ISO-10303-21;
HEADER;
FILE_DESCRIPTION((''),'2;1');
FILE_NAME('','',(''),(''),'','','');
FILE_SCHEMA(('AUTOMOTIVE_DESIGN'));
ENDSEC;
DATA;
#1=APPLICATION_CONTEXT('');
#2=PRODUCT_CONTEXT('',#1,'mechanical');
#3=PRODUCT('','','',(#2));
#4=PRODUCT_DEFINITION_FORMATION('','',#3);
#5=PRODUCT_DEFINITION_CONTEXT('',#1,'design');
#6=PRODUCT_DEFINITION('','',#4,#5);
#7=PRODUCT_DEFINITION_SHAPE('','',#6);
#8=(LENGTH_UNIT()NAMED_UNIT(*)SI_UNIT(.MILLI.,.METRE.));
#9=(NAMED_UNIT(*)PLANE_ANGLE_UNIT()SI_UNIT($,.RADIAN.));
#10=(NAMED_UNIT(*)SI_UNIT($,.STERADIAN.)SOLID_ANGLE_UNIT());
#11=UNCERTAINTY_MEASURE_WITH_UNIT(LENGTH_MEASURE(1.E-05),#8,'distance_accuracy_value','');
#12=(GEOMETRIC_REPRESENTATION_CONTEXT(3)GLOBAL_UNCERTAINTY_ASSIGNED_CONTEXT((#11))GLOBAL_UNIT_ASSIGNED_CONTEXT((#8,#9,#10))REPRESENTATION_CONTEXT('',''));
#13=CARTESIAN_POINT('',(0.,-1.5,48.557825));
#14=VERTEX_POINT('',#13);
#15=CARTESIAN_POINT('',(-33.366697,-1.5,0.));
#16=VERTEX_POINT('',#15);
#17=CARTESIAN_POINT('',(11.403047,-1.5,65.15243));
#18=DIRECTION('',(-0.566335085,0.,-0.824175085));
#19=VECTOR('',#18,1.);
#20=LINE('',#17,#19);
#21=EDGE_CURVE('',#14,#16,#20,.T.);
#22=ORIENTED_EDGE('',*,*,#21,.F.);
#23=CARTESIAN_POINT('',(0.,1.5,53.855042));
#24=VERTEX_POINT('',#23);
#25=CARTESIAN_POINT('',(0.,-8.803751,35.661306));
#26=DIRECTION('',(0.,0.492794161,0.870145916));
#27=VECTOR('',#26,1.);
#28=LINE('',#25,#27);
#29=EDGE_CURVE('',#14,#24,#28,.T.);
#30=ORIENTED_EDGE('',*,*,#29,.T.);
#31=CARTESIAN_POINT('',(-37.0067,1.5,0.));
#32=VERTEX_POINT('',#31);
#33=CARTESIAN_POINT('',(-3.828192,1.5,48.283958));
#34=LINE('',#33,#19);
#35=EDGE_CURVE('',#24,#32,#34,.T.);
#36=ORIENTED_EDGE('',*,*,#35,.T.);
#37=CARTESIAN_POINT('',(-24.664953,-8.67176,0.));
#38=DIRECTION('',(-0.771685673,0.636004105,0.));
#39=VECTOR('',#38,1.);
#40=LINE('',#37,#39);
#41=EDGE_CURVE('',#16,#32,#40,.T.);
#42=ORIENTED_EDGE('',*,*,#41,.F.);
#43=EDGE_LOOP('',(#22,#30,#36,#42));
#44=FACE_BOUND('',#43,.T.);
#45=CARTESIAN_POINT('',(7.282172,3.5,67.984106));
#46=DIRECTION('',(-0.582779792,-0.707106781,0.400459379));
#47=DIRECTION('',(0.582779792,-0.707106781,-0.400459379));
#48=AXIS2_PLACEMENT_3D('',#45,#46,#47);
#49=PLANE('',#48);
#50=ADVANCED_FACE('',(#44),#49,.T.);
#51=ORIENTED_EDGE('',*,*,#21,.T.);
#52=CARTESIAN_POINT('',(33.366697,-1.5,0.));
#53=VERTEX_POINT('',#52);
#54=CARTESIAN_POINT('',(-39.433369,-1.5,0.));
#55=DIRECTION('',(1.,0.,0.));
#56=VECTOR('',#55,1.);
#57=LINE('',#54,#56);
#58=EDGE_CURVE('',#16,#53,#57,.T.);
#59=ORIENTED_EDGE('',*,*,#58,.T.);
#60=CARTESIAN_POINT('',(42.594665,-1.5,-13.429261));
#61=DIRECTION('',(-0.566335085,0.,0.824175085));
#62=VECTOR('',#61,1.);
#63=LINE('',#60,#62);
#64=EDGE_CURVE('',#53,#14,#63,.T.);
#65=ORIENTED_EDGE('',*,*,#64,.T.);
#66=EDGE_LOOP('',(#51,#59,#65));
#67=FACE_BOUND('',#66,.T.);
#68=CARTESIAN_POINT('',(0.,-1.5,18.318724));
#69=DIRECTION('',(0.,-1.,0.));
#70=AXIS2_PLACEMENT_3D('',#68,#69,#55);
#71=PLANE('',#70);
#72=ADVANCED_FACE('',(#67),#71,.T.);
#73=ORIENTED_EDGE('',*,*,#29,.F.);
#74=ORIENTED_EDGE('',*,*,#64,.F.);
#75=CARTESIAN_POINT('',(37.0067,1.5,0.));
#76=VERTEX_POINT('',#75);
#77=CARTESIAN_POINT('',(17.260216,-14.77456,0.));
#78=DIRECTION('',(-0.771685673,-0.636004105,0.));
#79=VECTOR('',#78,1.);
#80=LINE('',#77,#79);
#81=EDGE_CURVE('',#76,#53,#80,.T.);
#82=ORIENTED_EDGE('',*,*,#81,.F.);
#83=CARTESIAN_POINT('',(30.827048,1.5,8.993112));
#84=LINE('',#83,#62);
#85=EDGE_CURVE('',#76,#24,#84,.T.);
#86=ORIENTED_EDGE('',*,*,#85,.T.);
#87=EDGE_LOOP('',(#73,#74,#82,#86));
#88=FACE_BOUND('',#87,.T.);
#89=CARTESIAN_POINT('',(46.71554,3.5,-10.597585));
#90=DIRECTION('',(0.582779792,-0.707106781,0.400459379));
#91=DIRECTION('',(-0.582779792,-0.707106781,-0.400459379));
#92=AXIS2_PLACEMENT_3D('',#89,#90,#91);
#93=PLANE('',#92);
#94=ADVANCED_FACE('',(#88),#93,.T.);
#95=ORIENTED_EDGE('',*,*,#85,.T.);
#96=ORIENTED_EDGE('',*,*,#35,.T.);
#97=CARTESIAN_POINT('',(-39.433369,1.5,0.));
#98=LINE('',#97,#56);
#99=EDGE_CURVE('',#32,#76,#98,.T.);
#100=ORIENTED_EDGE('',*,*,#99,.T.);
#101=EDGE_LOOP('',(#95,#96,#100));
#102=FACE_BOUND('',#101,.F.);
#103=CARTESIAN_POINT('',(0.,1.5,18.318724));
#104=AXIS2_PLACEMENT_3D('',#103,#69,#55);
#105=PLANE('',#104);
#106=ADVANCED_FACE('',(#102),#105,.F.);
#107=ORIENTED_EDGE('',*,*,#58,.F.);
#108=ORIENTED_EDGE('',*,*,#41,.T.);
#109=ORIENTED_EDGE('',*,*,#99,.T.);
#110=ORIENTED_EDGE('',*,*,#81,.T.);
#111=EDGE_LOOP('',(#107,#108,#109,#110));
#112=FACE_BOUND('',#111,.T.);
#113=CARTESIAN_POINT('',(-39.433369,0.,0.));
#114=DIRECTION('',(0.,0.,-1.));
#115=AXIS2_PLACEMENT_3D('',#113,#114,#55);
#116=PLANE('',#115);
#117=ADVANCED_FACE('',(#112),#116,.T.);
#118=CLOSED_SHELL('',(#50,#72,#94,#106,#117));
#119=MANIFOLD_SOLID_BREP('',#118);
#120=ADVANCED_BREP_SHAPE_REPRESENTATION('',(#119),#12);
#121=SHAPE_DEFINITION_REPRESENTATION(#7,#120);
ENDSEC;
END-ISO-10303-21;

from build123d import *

# Parameters (mm, degrees)
F1_DEPTH    = 1.5
F2_T1_DEPTH = 95.3458705502
F2_T3_DEPTH = 95.3458705502


# Not quite as in the source:
# - a fillet or chamfer that OpenCascade refuses, or shapes differently, is made with other operations: its cross-section is extruded or revolved along the edge and cut away or added


with BuildPart() as f1:
    # F0 (on Front) → F1 (new body, symmetric)
    with BuildSketch(Plane.XZ):
        Polygon((0, 57.386520531), (-39.4333686875, 0), (39.4333686875, 0), align=None)
    extrude(amount=F1_DEPTH, both=True)

    # F2: chamfer of 5 on 2 edges, made by hand

    # F2_s2 → F2_t1 (cut)
    with BuildSketch(Plane(origin=(34.0678617926, 0, 49.578215488), x_dir=(0, 1, 0), z_dir=(-0.5663350853, 0, -0.8241750853))):
        Polygon((3.5, -32.5), (-1.5, -27.5), (-1.5, -32.5), align=None)
    extrude(amount=F2_T1_DEPTH, mode=Mode.SUBTRACT)

    # F2_s4 → F2_t3 (cut)
    with BuildSketch(Plane(origin=(19.9298499385, 0, -29.0034755016), x_dir=(0, 1, 0), z_dir=(-0.5663350853, 0, 0.8241750853))):
        Polygon((3.5, -32.5), (-1.5, -27.5), (-1.5, -32.5), align=None)
    extrude(amount=F2_T3_DEPTH, mode=Mode.SUBTRACT)


solid = f1.part
